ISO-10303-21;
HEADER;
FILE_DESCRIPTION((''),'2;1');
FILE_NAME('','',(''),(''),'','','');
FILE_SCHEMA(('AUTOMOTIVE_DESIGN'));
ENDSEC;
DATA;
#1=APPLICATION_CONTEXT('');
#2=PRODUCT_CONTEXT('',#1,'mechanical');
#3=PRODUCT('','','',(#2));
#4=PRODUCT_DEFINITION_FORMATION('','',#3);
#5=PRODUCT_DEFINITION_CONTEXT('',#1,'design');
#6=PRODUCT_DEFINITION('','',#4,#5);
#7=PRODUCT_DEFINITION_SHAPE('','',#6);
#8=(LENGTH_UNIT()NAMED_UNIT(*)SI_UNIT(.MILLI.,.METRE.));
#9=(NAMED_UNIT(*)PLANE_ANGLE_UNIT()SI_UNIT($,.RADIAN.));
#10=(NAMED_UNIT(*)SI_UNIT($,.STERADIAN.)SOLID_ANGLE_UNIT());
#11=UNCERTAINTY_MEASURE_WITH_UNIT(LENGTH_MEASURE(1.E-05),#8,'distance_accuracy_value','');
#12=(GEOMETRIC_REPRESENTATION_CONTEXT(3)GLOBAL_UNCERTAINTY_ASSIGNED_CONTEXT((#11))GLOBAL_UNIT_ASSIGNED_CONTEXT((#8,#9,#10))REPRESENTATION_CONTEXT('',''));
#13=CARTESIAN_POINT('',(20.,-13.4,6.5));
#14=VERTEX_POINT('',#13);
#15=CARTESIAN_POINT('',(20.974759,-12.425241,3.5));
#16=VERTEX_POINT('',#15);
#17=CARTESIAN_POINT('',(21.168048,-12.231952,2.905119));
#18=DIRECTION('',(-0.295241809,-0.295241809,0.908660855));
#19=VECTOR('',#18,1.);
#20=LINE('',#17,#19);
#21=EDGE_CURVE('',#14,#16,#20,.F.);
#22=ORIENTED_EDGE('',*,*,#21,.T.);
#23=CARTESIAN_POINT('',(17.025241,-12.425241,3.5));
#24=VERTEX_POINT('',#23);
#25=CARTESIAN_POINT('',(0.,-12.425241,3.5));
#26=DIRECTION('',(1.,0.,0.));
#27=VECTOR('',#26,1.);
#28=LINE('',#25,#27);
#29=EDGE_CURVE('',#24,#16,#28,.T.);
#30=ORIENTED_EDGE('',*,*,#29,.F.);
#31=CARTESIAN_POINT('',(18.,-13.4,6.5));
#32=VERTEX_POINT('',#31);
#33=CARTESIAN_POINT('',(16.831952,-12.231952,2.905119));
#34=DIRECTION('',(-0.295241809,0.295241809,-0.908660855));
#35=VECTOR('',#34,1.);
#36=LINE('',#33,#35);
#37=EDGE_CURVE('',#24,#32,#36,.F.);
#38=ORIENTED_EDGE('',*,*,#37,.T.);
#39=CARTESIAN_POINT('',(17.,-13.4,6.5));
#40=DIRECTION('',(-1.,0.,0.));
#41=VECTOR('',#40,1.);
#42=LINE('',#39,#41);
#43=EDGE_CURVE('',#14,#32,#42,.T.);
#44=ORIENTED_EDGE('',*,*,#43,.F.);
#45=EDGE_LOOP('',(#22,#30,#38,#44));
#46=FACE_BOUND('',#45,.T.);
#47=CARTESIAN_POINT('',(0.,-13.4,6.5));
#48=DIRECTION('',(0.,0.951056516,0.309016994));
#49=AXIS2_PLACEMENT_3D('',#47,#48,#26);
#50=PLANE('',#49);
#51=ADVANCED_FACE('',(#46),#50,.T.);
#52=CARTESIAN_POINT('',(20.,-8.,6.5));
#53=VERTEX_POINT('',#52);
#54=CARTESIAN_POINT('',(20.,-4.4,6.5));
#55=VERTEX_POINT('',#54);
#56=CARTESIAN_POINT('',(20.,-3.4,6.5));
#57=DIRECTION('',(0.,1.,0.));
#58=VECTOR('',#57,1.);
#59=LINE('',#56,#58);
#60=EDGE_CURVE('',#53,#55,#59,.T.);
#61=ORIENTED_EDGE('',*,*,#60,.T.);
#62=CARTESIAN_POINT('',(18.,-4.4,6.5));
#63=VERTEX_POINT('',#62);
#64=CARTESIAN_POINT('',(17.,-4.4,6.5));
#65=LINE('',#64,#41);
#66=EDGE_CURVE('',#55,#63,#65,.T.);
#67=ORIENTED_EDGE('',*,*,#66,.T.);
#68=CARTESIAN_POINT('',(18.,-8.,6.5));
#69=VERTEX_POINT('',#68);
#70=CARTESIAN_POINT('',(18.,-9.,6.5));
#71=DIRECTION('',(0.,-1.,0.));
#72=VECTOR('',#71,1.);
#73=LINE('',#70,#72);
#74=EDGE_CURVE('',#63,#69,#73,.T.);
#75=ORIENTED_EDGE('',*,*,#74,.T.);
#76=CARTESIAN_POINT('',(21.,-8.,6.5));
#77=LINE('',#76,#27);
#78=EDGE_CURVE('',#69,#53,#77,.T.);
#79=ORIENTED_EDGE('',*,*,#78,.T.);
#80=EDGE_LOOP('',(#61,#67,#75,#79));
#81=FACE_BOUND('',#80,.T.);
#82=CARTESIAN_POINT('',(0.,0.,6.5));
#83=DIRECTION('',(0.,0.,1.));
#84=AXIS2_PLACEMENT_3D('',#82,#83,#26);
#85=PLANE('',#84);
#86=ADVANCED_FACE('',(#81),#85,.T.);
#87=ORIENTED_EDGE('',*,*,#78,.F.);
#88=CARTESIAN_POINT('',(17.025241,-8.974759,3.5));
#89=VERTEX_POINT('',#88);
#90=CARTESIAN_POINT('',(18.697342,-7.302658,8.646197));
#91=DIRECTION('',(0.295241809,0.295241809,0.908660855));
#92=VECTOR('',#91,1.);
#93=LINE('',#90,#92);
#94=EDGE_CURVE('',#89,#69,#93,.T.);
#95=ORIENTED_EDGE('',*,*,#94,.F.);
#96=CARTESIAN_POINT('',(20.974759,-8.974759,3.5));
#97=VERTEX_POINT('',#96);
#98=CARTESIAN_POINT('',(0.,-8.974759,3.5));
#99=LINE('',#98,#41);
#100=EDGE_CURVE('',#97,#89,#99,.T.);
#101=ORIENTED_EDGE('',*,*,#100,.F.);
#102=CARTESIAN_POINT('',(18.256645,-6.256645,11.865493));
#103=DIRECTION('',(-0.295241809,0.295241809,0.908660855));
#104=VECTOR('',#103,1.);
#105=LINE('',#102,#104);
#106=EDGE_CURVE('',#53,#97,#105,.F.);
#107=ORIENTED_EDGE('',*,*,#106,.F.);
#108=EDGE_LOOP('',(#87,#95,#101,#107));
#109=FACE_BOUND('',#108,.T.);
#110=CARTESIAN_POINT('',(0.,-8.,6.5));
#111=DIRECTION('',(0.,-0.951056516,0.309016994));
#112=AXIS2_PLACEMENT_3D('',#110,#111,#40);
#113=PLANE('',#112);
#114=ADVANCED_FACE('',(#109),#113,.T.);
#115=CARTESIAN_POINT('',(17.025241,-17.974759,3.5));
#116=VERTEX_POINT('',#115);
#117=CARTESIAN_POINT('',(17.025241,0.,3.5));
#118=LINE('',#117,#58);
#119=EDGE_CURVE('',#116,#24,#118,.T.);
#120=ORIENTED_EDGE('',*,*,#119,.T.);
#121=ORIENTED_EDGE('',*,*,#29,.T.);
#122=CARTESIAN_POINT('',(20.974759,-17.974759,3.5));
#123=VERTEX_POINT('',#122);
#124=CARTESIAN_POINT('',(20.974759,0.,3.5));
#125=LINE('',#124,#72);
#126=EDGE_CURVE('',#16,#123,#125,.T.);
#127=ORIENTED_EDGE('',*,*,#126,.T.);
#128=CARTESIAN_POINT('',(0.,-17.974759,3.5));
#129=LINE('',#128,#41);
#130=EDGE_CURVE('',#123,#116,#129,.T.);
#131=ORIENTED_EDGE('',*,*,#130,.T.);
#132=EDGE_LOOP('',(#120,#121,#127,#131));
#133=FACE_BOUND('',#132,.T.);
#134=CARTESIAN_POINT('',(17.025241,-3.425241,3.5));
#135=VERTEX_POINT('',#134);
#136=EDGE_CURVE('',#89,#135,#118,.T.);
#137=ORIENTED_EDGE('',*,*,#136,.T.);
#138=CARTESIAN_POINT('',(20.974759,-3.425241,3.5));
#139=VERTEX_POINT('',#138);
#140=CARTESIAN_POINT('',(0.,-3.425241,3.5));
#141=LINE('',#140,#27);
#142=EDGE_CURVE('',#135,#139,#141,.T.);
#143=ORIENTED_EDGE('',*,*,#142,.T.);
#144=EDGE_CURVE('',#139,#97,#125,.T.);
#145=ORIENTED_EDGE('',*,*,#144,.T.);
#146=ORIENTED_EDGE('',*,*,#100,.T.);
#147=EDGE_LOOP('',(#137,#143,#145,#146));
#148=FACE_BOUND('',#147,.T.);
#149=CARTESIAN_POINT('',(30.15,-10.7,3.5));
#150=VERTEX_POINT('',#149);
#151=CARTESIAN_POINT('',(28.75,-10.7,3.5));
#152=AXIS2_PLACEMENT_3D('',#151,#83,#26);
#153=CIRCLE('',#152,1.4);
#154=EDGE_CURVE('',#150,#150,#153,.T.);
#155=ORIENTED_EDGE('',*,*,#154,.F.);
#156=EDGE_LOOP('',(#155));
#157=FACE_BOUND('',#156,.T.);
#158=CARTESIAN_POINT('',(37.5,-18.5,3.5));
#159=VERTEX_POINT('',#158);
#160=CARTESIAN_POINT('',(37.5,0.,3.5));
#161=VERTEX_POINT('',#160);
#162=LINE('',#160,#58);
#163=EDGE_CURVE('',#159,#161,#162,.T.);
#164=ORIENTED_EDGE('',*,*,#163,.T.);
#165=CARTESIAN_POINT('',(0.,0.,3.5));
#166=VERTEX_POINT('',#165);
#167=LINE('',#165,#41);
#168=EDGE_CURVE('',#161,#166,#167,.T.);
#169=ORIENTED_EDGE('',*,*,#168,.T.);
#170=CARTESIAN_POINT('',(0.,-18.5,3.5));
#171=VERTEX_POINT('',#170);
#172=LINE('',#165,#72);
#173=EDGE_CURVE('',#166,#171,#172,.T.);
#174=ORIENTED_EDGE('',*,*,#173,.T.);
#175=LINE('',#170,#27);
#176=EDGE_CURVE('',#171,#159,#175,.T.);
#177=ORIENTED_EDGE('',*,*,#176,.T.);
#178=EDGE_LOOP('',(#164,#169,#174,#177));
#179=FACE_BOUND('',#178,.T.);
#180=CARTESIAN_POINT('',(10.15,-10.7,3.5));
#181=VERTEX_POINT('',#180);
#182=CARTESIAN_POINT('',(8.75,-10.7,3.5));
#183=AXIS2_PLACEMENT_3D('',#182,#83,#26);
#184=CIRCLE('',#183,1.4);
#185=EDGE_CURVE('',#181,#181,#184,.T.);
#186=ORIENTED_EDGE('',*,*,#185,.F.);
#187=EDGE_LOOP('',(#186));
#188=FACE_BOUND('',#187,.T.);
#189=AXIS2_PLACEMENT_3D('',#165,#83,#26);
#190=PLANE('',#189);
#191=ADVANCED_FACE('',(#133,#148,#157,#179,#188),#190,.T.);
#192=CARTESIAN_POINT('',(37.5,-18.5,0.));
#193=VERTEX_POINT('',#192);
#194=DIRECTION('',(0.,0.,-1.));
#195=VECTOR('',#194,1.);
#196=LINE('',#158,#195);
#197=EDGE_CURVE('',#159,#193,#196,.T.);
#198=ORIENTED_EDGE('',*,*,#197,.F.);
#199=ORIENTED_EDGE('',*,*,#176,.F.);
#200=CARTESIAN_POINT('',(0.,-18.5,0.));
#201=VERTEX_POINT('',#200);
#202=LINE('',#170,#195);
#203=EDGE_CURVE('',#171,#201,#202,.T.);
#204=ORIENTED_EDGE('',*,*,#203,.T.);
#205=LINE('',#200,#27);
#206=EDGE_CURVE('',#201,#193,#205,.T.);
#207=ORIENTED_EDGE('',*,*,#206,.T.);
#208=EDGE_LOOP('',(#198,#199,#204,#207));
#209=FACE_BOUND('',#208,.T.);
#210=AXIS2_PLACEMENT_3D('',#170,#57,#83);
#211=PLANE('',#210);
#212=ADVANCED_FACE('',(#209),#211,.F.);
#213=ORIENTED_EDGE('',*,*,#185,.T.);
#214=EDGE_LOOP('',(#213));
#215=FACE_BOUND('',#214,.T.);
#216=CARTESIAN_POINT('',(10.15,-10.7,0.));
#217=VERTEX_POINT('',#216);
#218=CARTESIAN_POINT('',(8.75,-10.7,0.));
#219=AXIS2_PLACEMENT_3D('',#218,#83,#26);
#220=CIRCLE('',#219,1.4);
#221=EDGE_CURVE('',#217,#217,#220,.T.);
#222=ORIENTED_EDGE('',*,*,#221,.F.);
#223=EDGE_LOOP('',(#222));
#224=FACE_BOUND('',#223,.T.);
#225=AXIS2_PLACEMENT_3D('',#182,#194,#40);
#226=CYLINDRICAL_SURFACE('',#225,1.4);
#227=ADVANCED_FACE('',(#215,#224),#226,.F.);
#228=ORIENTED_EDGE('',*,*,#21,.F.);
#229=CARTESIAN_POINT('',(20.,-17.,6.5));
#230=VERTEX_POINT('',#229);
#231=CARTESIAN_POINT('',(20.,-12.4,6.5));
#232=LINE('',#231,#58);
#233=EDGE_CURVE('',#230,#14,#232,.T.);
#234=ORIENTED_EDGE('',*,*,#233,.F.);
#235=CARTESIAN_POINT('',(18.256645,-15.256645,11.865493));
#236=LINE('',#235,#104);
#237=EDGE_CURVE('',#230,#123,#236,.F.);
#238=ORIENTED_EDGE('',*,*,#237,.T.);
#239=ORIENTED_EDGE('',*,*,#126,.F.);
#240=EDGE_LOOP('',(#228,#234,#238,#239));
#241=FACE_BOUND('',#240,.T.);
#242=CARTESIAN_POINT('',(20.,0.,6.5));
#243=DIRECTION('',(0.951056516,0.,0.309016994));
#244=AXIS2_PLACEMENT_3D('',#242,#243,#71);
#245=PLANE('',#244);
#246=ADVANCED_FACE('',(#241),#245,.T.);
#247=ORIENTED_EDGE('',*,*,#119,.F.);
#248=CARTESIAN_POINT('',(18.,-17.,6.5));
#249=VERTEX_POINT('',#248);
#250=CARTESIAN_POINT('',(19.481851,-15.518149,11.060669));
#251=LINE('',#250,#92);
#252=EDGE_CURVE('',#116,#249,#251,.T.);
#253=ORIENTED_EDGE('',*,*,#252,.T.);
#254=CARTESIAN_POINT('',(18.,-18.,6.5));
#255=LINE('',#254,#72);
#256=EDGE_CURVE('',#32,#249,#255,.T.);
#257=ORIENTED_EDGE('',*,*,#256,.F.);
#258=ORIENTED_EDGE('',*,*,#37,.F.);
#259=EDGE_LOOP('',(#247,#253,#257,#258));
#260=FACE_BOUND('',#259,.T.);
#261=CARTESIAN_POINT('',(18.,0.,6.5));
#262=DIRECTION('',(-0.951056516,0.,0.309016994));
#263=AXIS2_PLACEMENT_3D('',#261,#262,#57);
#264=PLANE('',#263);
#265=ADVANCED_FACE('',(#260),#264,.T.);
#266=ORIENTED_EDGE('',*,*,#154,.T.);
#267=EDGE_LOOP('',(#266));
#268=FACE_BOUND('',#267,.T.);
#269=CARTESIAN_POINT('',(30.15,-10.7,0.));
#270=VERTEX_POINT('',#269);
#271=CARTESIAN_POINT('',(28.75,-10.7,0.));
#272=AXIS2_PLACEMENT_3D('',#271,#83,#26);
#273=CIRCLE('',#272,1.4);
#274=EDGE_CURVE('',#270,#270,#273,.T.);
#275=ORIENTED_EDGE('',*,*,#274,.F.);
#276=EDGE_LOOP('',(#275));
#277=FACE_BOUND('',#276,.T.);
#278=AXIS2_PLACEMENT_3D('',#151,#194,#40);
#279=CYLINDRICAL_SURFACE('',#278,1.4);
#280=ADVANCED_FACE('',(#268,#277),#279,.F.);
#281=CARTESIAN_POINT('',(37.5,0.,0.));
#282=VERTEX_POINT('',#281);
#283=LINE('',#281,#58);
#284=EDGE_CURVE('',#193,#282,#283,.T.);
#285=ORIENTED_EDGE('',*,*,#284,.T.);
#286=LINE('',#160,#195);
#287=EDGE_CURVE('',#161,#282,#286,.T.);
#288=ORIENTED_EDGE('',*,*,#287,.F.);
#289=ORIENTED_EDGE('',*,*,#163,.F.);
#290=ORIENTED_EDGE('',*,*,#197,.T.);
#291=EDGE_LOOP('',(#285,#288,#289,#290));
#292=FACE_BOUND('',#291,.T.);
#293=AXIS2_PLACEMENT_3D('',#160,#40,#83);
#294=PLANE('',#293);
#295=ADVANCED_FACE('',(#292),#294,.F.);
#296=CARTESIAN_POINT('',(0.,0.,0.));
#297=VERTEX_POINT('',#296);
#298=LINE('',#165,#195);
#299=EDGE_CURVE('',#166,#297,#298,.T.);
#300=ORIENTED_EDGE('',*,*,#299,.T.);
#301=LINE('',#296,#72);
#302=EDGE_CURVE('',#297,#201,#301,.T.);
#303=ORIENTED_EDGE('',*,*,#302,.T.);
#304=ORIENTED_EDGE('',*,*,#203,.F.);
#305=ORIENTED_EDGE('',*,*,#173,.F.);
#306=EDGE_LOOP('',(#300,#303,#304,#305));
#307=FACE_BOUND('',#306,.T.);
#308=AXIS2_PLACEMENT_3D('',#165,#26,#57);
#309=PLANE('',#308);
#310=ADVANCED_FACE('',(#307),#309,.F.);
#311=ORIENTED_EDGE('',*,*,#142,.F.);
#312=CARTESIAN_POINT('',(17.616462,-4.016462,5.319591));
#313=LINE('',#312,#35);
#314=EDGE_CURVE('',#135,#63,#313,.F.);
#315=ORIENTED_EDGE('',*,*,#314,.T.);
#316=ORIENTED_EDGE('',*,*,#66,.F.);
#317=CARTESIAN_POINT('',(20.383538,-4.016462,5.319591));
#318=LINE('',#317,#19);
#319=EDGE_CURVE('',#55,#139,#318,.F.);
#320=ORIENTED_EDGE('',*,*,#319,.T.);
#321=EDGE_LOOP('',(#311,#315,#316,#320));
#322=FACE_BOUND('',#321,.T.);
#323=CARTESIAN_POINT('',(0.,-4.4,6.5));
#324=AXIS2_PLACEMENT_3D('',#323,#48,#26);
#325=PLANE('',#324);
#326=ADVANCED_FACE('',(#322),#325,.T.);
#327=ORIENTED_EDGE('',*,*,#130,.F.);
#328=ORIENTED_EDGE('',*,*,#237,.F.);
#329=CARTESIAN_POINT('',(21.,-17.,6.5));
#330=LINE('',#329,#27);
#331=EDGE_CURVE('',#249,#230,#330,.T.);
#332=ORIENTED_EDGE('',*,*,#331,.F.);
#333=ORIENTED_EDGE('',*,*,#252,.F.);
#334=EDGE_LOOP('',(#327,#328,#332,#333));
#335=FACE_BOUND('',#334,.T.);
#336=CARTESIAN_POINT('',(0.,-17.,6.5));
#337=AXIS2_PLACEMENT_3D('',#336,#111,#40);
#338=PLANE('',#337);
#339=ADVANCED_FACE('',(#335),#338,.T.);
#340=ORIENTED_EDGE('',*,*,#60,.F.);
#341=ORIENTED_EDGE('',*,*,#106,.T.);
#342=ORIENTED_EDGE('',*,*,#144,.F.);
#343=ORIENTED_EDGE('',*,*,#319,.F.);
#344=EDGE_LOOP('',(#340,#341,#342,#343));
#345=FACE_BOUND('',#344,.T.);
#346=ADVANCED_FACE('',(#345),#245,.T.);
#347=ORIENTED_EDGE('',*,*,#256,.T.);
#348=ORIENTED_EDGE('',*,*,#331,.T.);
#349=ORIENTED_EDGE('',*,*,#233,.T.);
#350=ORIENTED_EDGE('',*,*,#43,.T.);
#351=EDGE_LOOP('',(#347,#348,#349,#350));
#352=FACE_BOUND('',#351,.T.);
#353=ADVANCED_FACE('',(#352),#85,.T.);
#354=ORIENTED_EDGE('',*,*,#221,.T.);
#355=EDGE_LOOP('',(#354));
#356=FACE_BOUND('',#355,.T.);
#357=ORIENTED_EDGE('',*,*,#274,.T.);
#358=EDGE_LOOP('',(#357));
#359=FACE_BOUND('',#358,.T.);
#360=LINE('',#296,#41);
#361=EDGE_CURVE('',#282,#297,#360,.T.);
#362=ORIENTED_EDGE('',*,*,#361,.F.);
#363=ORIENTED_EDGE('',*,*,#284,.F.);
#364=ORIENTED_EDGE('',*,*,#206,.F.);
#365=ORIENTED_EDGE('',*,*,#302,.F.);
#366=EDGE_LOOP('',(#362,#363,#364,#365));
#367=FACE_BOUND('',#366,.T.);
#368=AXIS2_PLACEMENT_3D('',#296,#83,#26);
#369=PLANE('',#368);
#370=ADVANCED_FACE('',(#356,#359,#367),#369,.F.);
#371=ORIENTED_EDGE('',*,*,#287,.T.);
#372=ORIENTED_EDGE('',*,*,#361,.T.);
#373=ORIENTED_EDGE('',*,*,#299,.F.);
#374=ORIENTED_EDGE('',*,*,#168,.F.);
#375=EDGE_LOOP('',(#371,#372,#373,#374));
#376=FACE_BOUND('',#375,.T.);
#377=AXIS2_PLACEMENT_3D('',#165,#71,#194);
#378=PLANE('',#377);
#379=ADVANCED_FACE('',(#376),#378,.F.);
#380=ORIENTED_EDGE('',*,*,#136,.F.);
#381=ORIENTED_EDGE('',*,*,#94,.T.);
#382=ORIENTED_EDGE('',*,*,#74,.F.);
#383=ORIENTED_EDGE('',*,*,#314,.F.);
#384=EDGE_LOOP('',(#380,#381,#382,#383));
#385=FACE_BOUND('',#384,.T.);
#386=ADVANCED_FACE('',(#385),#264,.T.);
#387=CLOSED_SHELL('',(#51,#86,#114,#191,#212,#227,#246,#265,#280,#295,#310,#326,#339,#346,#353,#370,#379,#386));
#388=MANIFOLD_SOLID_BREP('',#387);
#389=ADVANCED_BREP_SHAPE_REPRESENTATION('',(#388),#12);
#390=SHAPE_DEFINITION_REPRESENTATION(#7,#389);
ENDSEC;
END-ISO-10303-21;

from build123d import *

# Parameters (mm, degrees)
SKETCH_1_W       = 37.5
SKETCH_1_H       = 18.5
SKETCH_1_R       = 1.4
EXTRUDE_1_DEPTH  = 3.5
SKETCH_2_W       = 4
SKETCH_2_H       = 5.6
EXTRUDE_2_DEPTH  = 3
CHAMFER_1_SIZE   = 3.077683537
CHAMFER_1_SIZE_2 = 1


with BuildPart() as part:
    # Эскиз1 → Бобышка-Вытянуть1 (new body)
    with BuildSketch(Plane.XY):
        with Locations((18.75, -9.25)):
            Rectangle(SKETCH_1_W, SKETCH_1_H)
        with Locations((8.75, -10.7)):
            Circle(SKETCH_1_R, mode=Mode.SUBTRACT)
        with Locations((28.75, -10.7)):
            Circle(SKETCH_1_R, mode=Mode.SUBTRACT)
    extrude(amount=EXTRUDE_1_DEPTH)

    # Эскиз2 → Бобышка-Вытянуть2 (add)
    with BuildSketch(Plane.XY.offset(3.5)):
        with Locations((19, -15.2)):
            Rectangle(SKETCH_2_W, SKETCH_2_H)
        with Locations((19, -6.2)):
            Rectangle(SKETCH_2_W, SKETCH_2_H)
    extrude(amount=EXTRUDE_2_DEPTH)

    # Фаска1
    # the kernel refuses this chamfer: 3.077683537, 1 mm, written as the material it takes off along each edge
    with BuildSketch(Plane(origin=(9.012519835, -3.4, 6.5), x_dir=(0, 0.011906840413017355, -0.9999291110630687), z_dir=(1, 0, 0))) as chamfer_1_piece_1_section:
        Polygon((CHAMFER_1_SIZE * 0.99992911112, -CHAMFER_1_SIZE * 0.0119068404137), (-CHAMFER_1_SIZE_2 * 0.011906840413, -CHAMFER_1_SIZE_2 * 0.999929111063), (0, 0), align=None)
    chamfer_1_piece_1 = extrude(amount=19.97496033, mode=Mode.PRIVATE)
    chamfer_1_piece_1 = split(chamfer_1_piece_1, bisect_by=Plane(origin=(19, -3.706604024, 3.5), z_dir=(0, 0, 1)), keep=Keep.TOP, mode=Mode.PRIVATE)
    add(chamfer_1_piece_1, mode=Mode.SUBTRACT)
    with BuildSketch(Plane(origin=(21, 4.587480165, 6.5), x_dir=(0.011906840413017495, 0, -0.9999291110630687), z_dir=(0, -1, 0))) as chamfer_1_piece_2_section:
        Polygon((CHAMFER_1_SIZE * 0.99992911112, -CHAMFER_1_SIZE * 0.0119068404137), (-CHAMFER_1_SIZE_2 * 0.011906840413, -CHAMFER_1_SIZE_2 * 0.999929111063), (0, 0), align=None)
    chamfer_1_piece_2 = extrude(amount=21.57496033, mode=Mode.PRIVATE)
    chamfer_1_piece_2 = split(chamfer_1_piece_2, bisect_by=Plane(origin=(20.693395976, -6.2, 3.5), z_dir=(0, 0, 1)), keep=Keep.TOP, mode=Mode.PRIVATE)
    add(chamfer_1_piece_2, mode=Mode.SUBTRACT)
    with BuildSketch(Plane(origin=(28.987480165, -9, 6.5), x_dir=(0, -0.011906840413017495, -0.9999291110630687), z_dir=(-1, 0, 0))) as chamfer_1_piece_3_section:
        Polygon((CHAMFER_1_SIZE * 0.99992911112, -CHAMFER_1_SIZE * 0.0119068404137), (-CHAMFER_1_SIZE_2 * 0.011906840413, -CHAMFER_1_SIZE_2 * 0.999929111063), (0, 0), align=None)
    chamfer_1_piece_3 = extrude(amount=19.97496033, mode=Mode.PRIVATE)
    chamfer_1_piece_3 = split(chamfer_1_piece_3, bisect_by=Plane(origin=(19, -8.693395976, 3.5), z_dir=(0, 0, 1)), keep=Keep.TOP, mode=Mode.PRIVATE)
    add(chamfer_1_piece_3, mode=Mode.SUBTRACT)
    with BuildSketch(Plane(origin=(17, -16.987480165, 6.5), x_dir=(-0.011906840413017495, 0, -0.9999291110630687), z_dir=(0, 1, 0))) as chamfer_1_piece_4_section:
        Polygon((CHAMFER_1_SIZE * 0.99992911112, -CHAMFER_1_SIZE * 0.0119068404137), (-CHAMFER_1_SIZE_2 * 0.011906840413, -CHAMFER_1_SIZE_2 * 0.999929111063), (0, 0), align=None)
    chamfer_1_piece_4 = extrude(amount=21.57496033, mode=Mode.PRIVATE)
    chamfer_1_piece_4 = split(chamfer_1_piece_4, bisect_by=Plane(origin=(17.306604024, -6.2, 3.5), z_dir=(0, 0, 1)), keep=Keep.TOP, mode=Mode.PRIVATE)
    add(chamfer_1_piece_4, mode=Mode.SUBTRACT)
    with BuildSketch(Plane(origin=(9.012519835, -12.4, 6.5), x_dir=(0, 0.011906840413017495, -0.9999291110630687), z_dir=(1, 0, 0))) as chamfer_1_piece_5_section:
        Polygon((CHAMFER_1_SIZE * 0.99992911112, -CHAMFER_1_SIZE * 0.0119068404137), (-CHAMFER_1_SIZE_2 * 0.011906840413, -CHAMFER_1_SIZE_2 * 0.999929111063), (0, 0), align=None)
    chamfer_1_piece_5 = extrude(amount=19.97496033, mode=Mode.PRIVATE)
    chamfer_1_piece_5 = split(chamfer_1_piece_5, bisect_by=Plane(origin=(19, -12.706604024, 3.5), z_dir=(0, 0, 1)), keep=Keep.TOP, mode=Mode.PRIVATE)
    add(chamfer_1_piece_5, mode=Mode.SUBTRACT)
    with BuildSketch(Plane(origin=(21, -4.412519835, 6.5), x_dir=(0.011906840413017495, 0, -0.9999291110630687), z_dir=(0, -1, 0))) as chamfer_1_piece_6_section:
        Polygon((CHAMFER_1_SIZE * 0.99992911112, -CHAMFER_1_SIZE * 0.0119068404137), (-CHAMFER_1_SIZE_2 * 0.011906840413, -CHAMFER_1_SIZE_2 * 0.999929111063), (0, 0), align=None)
    chamfer_1_piece_6 = extrude(amount=21.57496033, mode=Mode.PRIVATE)
    chamfer_1_piece_6 = split(chamfer_1_piece_6, bisect_by=Plane(origin=(20.693395976, -15.2, 3.5), z_dir=(0, 0, 1)), keep=Keep.TOP, mode=Mode.PRIVATE)
    add(chamfer_1_piece_6, mode=Mode.SUBTRACT)
    with BuildSketch(Plane(origin=(28.987480165, -18, 6.5), x_dir=(0, -0.011906840413017495, -0.9999291110630687), z_dir=(-1, 0, 0))) as chamfer_1_piece_7_section:
        Polygon((CHAMFER_1_SIZE * 0.99992911112, -CHAMFER_1_SIZE * 0.0119068404137), (-CHAMFER_1_SIZE_2 * 0.011906840413, -CHAMFER_1_SIZE_2 * 0.999929111063), (0, 0), align=None)
    chamfer_1_piece_7 = extrude(amount=19.97496033, mode=Mode.PRIVATE)
    chamfer_1_piece_7 = split(chamfer_1_piece_7, bisect_by=Plane(origin=(19, -17.693395976, 3.5), z_dir=(0, 0, 1)), keep=Keep.TOP, mode=Mode.PRIVATE)
    add(chamfer_1_piece_7, mode=Mode.SUBTRACT)
    with BuildSketch(Plane(origin=(17, -25.987480165, 6.5), x_dir=(-0.011906840413017495, 0, -0.9999291110630687), z_dir=(0, 1, 0))) as chamfer_1_piece_8_section:
        Polygon((CHAMFER_1_SIZE * 0.99992911112, -CHAMFER_1_SIZE * 0.0119068404137), (-CHAMFER_1_SIZE_2 * 0.011906840413, -CHAMFER_1_SIZE_2 * 0.999929111063), (0, 0), align=None)
    chamfer_1_piece_8 = extrude(amount=21.57496033, mode=Mode.PRIVATE)
    chamfer_1_piece_8 = split(chamfer_1_piece_8, bisect_by=Plane(origin=(17.306604024, -15.2, 3.5), z_dir=(0, 0, 1)), keep=Keep.TOP, mode=Mode.PRIVATE)
    add(chamfer_1_piece_8, mode=Mode.SUBTRACT)


solid = part.part
